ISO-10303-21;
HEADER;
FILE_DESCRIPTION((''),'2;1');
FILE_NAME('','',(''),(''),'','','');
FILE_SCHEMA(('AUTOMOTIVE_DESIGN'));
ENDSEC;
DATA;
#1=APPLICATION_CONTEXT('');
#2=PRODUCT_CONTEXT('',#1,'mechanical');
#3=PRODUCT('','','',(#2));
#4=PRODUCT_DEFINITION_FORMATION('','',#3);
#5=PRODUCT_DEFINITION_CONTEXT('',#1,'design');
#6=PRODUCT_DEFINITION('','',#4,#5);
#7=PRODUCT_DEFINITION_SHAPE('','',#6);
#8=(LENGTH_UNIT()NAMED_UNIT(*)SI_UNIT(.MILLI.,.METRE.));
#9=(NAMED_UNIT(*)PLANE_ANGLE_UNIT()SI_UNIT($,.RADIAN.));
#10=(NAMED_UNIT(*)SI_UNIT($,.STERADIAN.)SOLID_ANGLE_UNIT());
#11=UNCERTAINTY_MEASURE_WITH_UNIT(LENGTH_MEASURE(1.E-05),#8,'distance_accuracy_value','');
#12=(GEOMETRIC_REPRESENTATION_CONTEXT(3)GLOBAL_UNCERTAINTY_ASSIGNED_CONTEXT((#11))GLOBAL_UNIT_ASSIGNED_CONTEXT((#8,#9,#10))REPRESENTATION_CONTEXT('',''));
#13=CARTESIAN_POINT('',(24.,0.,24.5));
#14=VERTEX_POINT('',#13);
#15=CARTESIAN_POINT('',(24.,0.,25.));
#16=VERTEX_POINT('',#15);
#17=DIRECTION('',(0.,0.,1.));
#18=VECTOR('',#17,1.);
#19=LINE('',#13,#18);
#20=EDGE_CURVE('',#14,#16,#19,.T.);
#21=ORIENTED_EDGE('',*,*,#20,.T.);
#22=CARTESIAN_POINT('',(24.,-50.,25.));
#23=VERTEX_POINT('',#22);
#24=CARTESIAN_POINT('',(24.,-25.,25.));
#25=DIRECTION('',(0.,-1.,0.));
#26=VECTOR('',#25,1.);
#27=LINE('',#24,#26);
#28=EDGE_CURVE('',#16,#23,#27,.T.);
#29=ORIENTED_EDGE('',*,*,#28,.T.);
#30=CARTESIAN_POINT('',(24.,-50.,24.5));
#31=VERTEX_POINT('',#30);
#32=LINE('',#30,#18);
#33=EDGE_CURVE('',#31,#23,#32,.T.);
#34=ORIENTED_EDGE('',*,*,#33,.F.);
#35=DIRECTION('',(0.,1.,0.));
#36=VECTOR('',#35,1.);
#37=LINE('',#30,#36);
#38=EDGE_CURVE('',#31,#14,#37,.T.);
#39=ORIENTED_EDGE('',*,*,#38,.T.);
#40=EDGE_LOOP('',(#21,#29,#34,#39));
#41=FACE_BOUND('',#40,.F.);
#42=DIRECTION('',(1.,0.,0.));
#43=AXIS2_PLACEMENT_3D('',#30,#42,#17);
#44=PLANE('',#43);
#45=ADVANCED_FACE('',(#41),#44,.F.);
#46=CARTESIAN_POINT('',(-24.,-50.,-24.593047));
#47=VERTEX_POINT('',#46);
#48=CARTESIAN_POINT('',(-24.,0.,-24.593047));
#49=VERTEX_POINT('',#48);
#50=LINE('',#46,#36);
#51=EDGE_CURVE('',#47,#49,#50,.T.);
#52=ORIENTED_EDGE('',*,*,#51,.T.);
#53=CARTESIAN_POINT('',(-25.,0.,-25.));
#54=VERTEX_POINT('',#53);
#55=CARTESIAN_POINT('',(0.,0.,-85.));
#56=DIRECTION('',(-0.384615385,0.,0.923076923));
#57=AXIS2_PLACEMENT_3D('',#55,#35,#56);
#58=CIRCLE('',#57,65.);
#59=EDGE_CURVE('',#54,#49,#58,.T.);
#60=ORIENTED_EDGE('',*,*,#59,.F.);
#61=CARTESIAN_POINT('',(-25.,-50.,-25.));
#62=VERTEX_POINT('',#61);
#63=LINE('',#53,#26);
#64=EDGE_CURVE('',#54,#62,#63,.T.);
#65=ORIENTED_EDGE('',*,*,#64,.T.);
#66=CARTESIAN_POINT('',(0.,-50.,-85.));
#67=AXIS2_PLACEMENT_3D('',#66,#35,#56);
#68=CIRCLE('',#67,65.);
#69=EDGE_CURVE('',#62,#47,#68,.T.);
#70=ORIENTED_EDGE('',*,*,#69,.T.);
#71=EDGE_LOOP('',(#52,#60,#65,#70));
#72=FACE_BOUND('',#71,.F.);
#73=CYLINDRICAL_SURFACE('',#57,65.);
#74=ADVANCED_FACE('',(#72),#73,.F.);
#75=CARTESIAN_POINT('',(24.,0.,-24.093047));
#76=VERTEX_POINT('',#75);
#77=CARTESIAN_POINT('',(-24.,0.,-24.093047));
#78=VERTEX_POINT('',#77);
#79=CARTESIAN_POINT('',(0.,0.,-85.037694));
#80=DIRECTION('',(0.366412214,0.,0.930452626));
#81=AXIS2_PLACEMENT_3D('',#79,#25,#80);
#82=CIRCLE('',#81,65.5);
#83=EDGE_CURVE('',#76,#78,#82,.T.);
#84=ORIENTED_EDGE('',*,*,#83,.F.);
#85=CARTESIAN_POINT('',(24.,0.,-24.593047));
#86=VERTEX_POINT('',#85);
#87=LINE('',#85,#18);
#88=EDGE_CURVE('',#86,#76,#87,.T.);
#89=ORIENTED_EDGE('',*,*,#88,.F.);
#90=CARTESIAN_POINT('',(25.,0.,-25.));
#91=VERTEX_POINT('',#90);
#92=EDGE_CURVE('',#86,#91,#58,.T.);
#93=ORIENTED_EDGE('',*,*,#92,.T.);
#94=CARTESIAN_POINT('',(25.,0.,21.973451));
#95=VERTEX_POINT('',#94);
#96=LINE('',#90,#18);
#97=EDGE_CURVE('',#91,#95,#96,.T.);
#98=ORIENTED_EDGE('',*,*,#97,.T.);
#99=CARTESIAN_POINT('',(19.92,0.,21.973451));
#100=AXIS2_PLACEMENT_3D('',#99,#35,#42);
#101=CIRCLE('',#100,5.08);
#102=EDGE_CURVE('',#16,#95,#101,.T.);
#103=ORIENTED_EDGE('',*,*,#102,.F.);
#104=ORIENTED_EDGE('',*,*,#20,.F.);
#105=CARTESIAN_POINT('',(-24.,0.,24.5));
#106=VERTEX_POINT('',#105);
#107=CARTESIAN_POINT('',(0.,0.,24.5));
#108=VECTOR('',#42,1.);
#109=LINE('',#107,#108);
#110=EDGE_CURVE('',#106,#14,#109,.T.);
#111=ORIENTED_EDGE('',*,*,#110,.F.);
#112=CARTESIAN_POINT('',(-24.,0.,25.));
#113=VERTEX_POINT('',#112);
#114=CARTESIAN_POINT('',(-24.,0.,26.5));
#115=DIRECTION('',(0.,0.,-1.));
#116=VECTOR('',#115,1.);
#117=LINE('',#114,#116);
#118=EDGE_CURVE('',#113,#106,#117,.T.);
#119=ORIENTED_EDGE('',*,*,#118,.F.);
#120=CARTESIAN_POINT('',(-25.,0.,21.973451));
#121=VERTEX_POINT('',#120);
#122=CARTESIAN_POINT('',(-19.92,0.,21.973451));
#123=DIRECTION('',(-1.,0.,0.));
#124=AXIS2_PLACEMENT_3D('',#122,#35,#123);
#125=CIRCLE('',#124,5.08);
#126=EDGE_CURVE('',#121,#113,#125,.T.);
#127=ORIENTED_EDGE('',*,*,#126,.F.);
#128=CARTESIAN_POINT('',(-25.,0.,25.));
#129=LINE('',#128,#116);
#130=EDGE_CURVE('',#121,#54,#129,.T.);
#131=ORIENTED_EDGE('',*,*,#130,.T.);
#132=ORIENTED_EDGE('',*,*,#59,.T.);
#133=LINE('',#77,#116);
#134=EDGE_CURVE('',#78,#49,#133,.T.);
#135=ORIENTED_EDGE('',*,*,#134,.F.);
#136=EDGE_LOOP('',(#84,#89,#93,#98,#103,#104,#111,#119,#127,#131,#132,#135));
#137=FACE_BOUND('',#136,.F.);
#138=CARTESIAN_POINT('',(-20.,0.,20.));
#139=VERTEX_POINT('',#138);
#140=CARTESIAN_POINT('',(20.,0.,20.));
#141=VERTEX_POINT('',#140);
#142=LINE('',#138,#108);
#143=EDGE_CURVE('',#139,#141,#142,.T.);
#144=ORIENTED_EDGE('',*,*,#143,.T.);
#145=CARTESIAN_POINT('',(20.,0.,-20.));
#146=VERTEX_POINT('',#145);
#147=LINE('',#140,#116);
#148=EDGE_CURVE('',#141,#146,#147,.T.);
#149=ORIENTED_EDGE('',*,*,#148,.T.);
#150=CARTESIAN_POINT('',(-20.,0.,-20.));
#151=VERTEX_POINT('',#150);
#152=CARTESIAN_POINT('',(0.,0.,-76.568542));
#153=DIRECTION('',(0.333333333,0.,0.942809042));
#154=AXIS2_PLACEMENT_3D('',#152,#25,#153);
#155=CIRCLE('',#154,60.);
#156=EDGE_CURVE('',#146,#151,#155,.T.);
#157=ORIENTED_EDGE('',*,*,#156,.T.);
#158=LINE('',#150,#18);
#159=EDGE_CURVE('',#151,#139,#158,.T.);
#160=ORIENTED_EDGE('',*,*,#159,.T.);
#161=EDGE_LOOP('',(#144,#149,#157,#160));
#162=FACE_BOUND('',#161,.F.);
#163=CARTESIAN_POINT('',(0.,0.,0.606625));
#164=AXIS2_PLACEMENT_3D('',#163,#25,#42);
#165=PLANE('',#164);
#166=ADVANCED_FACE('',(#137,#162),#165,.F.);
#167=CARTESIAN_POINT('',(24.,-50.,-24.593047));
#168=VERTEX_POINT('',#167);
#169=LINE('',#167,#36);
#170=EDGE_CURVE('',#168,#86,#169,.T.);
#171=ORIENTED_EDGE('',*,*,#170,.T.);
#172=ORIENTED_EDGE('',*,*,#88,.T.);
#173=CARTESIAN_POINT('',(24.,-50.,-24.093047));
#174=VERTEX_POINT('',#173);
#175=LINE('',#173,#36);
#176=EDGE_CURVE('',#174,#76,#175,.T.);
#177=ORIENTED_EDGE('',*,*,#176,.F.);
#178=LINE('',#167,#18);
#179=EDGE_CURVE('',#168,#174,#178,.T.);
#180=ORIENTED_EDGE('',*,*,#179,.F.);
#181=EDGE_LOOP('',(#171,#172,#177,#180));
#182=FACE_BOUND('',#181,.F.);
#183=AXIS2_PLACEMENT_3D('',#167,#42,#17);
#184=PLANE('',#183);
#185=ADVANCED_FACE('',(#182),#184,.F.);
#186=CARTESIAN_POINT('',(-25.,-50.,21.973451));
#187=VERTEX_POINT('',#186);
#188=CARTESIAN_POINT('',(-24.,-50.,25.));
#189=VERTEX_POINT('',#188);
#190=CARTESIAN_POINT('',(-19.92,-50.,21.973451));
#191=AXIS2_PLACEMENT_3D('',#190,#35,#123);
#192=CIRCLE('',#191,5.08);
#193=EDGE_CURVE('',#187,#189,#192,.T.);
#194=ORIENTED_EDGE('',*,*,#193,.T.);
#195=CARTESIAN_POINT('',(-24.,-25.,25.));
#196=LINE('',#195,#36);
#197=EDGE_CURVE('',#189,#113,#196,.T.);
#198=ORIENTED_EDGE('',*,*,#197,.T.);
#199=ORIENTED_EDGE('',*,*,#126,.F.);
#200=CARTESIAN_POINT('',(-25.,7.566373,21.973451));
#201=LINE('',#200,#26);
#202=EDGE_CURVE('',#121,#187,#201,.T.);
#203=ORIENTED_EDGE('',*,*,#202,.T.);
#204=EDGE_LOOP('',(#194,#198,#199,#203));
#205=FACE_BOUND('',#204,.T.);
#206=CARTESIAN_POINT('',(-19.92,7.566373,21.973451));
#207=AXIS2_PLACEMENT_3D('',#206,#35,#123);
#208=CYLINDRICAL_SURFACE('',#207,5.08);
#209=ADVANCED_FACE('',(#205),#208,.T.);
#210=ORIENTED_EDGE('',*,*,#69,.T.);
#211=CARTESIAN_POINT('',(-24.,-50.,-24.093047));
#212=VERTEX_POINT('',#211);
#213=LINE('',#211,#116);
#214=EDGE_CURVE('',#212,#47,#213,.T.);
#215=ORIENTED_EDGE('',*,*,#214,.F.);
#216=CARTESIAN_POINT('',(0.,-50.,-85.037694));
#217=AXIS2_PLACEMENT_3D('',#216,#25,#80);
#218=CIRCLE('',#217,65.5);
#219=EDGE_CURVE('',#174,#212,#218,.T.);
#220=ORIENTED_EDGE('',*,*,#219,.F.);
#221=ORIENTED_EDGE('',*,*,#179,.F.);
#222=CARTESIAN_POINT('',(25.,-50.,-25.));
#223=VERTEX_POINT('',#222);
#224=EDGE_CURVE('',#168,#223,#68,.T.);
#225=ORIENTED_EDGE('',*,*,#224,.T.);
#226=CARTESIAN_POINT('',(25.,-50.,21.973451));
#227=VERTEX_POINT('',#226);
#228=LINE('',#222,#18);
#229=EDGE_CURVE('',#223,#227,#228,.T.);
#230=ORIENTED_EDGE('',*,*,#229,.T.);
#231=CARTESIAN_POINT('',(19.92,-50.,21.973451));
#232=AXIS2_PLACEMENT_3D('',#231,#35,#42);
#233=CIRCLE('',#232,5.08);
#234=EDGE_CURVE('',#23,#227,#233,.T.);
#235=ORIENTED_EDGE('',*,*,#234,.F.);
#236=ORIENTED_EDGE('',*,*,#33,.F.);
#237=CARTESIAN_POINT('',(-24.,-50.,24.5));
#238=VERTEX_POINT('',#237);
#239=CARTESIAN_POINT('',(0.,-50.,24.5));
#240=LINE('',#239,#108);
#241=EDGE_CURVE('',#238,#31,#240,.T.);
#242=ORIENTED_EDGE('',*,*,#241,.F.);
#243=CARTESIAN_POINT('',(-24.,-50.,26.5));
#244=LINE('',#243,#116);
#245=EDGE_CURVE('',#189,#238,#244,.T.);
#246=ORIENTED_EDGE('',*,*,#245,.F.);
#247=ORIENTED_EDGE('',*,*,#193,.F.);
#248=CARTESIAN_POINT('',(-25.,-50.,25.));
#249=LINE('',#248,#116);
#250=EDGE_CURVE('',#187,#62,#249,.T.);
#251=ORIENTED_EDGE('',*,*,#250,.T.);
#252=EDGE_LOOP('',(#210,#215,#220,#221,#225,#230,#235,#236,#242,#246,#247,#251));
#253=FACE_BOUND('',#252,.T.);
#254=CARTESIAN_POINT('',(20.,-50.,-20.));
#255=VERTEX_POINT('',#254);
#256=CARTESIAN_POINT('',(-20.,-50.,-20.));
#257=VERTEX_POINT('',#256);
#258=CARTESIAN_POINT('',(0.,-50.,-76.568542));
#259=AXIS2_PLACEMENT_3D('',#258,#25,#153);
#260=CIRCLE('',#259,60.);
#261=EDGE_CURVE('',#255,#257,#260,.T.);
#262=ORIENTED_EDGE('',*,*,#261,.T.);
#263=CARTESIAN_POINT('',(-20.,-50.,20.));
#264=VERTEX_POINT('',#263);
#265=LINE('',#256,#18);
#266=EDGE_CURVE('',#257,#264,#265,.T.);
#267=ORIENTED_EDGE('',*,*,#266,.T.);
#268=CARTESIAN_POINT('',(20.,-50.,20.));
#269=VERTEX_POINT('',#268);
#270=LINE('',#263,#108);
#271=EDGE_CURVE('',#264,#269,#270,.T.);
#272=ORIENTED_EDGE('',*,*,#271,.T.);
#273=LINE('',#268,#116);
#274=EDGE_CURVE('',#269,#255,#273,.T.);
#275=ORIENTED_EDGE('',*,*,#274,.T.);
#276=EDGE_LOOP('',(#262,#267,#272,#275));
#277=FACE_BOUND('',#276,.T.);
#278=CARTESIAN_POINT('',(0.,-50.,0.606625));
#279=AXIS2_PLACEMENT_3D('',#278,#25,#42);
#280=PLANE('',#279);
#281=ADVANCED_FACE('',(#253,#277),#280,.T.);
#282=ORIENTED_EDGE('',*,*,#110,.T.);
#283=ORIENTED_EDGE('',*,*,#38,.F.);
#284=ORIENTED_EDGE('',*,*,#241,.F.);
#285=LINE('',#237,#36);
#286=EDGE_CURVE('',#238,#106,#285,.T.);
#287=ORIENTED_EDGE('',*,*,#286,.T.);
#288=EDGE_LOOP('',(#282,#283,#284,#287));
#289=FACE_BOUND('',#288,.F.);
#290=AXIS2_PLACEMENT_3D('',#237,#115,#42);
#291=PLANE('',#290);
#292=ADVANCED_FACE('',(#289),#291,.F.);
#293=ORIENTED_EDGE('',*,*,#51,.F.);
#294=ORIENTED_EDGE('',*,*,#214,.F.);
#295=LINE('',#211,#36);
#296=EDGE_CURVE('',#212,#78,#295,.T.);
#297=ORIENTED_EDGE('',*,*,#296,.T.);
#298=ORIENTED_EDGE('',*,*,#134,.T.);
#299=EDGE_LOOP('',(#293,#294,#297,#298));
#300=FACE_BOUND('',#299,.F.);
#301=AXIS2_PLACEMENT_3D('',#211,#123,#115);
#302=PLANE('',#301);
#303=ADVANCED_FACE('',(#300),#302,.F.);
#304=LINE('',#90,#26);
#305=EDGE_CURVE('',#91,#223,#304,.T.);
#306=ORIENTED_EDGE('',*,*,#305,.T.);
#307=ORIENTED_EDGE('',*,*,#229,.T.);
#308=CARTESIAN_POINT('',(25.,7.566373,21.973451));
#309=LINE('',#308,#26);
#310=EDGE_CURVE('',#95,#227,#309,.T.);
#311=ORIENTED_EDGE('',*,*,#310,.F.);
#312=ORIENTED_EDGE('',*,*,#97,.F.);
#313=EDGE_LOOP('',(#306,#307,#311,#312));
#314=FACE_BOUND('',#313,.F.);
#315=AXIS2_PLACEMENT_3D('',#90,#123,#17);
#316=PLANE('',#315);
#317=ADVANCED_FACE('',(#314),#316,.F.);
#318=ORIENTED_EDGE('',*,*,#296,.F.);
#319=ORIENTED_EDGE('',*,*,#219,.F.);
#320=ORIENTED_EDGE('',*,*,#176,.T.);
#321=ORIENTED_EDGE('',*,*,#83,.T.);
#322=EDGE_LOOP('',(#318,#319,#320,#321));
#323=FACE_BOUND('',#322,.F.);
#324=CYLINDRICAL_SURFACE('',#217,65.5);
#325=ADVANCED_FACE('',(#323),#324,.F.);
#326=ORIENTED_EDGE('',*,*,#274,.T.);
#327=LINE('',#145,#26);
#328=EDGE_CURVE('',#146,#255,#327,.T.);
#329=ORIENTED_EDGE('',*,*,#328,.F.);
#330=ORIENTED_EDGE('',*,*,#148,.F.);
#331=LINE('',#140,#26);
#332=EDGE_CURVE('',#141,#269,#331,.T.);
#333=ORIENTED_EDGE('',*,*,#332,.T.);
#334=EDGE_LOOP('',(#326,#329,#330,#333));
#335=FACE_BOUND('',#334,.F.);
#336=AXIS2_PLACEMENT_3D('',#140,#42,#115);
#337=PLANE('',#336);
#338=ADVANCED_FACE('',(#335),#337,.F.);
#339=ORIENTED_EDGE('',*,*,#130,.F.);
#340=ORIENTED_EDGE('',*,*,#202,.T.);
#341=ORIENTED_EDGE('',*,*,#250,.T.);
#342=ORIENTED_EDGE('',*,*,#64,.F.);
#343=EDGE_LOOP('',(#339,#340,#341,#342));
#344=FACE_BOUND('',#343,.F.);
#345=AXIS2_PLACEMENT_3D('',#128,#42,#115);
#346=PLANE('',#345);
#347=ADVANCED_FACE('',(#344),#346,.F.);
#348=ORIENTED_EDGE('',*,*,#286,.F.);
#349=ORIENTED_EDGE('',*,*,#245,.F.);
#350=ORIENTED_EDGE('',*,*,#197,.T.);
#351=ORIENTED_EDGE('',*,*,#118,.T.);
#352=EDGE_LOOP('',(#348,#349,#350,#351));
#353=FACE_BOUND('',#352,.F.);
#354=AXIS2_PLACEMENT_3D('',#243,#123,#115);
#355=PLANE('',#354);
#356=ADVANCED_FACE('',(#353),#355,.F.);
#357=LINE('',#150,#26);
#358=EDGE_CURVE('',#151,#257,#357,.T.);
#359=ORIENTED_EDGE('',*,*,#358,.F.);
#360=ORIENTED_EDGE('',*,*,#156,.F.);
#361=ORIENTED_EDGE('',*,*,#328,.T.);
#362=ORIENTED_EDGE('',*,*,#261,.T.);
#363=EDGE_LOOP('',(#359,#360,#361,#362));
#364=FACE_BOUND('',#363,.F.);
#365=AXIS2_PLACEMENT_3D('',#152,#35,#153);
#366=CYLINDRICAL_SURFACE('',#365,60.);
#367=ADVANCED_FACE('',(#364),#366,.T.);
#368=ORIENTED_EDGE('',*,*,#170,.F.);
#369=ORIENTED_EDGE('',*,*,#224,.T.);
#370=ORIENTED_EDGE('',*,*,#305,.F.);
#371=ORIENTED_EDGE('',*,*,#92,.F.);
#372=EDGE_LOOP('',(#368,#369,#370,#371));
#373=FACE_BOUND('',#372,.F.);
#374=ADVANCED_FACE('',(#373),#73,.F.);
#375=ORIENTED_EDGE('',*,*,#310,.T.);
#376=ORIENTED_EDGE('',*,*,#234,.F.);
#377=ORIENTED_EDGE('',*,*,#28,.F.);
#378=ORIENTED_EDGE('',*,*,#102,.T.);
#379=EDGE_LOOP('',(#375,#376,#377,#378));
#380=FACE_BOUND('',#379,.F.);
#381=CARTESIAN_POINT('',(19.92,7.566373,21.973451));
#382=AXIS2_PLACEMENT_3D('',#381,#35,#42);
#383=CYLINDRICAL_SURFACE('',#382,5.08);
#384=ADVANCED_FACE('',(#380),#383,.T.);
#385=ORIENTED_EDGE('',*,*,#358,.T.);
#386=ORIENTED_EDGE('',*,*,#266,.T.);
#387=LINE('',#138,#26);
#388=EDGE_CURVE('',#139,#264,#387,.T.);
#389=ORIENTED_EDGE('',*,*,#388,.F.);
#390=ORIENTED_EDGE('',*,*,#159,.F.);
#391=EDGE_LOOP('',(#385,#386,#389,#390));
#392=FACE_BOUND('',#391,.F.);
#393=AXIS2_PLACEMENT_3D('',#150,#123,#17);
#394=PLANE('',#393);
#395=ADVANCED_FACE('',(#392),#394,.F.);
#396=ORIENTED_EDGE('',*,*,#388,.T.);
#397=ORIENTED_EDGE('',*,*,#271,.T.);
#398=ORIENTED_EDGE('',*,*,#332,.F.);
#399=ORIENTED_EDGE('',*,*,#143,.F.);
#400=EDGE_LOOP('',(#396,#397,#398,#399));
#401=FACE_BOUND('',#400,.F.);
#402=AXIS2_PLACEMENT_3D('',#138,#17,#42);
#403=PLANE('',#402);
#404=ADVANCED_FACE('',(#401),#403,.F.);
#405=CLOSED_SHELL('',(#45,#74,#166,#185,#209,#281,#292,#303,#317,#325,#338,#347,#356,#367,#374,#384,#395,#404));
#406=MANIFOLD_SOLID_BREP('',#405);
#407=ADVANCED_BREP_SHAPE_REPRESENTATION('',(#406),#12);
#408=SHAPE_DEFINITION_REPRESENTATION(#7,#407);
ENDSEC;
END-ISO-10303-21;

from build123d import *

# Parameters (mm, degrees)
F1_DEPTH    = 50
F2_W        = 48
F2_H        = 0.5
F2_H_2      = 1.5
F3_DEPTH    = 50
F4_T1_DEPTH = 65.1327459504


# Not quite as in the source:
# - a fillet or chamfer that OpenCascade refuses, or shapes differently, is made with other operations: its cross-section is extruded or revolved along the edge and cut away or added


with BuildPart() as f1:
    # F0 (on Front) → F1 (new body)
    with BuildSketch(Plane.XZ):
        with BuildLine():
            Line((25, -25), (25, 25))
            Line((25, 25), (-25, 25))
            Line((-25, 25), (-25, -25))
            ThreePointArc((-25, -25), (0, -20), (25, -25))
        make_face()
        with BuildLine():
            Line((-20, 20), (20, 20))
            Line((20, 20), (20, -20))
            ThreePointArc((20, -20), (0, -16.5685424949), (-20, -20))
            Line((-20, -20), (-20, 20))
        make_face(mode=Mode.SUBTRACT)
    extrude(amount=F1_DEPTH)

    # F2 (on face) → F3 (cut)
    with BuildSketch(Plane.XZ.offset(50)):
        with Locations((0, 24.75)):
            Rectangle(F2_W, F2_H)
        with Locations((0, 25.75)):
            Rectangle(F2_W, F2_H_2)
        with BuildLine():
            Line((-24, -24.0930467578), (-24, -24.5930467578))
            ThreePointArc((-24, -24.5930467578), (0, -20), (24, -24.5930467578))
            Line((24, -24.5930467578), (24, -24.0930467578))
            ThreePointArc((24, -24.0930467578), (0, -19.5376937746), (-24, -24.0930467578))
        make_face()
    extrude(amount=-F3_DEPTH, mode=Mode.SUBTRACT)

    # F4: fillet of radius 5.08 on 2 edges, made by hand

    # F4_s2 → F4_t1 (cut)
    with BuildSketch(Plane.XZ.offset(-7.5663729752)):
        with BuildLine():
            ThreePointArc((25, 21.9734508099), (24.7435256815, 23.567188555), (24, 25))
            Line((24, 25), (25, 25))
            Line((25, 25), (25, 21.9734508099))
        make_face()
        with BuildLine():
            ThreePointArc((-25, 21.9734508099), (-24.7435256815, 23.567188555), (-24, 25))
            Line((-24, 25), (-25, 25))
            Line((-25, 25), (-25, 21.9734508099))
        make_face()
    extrude(amount=F4_T1_DEPTH, mode=Mode.SUBTRACT)


solid = f1.part
